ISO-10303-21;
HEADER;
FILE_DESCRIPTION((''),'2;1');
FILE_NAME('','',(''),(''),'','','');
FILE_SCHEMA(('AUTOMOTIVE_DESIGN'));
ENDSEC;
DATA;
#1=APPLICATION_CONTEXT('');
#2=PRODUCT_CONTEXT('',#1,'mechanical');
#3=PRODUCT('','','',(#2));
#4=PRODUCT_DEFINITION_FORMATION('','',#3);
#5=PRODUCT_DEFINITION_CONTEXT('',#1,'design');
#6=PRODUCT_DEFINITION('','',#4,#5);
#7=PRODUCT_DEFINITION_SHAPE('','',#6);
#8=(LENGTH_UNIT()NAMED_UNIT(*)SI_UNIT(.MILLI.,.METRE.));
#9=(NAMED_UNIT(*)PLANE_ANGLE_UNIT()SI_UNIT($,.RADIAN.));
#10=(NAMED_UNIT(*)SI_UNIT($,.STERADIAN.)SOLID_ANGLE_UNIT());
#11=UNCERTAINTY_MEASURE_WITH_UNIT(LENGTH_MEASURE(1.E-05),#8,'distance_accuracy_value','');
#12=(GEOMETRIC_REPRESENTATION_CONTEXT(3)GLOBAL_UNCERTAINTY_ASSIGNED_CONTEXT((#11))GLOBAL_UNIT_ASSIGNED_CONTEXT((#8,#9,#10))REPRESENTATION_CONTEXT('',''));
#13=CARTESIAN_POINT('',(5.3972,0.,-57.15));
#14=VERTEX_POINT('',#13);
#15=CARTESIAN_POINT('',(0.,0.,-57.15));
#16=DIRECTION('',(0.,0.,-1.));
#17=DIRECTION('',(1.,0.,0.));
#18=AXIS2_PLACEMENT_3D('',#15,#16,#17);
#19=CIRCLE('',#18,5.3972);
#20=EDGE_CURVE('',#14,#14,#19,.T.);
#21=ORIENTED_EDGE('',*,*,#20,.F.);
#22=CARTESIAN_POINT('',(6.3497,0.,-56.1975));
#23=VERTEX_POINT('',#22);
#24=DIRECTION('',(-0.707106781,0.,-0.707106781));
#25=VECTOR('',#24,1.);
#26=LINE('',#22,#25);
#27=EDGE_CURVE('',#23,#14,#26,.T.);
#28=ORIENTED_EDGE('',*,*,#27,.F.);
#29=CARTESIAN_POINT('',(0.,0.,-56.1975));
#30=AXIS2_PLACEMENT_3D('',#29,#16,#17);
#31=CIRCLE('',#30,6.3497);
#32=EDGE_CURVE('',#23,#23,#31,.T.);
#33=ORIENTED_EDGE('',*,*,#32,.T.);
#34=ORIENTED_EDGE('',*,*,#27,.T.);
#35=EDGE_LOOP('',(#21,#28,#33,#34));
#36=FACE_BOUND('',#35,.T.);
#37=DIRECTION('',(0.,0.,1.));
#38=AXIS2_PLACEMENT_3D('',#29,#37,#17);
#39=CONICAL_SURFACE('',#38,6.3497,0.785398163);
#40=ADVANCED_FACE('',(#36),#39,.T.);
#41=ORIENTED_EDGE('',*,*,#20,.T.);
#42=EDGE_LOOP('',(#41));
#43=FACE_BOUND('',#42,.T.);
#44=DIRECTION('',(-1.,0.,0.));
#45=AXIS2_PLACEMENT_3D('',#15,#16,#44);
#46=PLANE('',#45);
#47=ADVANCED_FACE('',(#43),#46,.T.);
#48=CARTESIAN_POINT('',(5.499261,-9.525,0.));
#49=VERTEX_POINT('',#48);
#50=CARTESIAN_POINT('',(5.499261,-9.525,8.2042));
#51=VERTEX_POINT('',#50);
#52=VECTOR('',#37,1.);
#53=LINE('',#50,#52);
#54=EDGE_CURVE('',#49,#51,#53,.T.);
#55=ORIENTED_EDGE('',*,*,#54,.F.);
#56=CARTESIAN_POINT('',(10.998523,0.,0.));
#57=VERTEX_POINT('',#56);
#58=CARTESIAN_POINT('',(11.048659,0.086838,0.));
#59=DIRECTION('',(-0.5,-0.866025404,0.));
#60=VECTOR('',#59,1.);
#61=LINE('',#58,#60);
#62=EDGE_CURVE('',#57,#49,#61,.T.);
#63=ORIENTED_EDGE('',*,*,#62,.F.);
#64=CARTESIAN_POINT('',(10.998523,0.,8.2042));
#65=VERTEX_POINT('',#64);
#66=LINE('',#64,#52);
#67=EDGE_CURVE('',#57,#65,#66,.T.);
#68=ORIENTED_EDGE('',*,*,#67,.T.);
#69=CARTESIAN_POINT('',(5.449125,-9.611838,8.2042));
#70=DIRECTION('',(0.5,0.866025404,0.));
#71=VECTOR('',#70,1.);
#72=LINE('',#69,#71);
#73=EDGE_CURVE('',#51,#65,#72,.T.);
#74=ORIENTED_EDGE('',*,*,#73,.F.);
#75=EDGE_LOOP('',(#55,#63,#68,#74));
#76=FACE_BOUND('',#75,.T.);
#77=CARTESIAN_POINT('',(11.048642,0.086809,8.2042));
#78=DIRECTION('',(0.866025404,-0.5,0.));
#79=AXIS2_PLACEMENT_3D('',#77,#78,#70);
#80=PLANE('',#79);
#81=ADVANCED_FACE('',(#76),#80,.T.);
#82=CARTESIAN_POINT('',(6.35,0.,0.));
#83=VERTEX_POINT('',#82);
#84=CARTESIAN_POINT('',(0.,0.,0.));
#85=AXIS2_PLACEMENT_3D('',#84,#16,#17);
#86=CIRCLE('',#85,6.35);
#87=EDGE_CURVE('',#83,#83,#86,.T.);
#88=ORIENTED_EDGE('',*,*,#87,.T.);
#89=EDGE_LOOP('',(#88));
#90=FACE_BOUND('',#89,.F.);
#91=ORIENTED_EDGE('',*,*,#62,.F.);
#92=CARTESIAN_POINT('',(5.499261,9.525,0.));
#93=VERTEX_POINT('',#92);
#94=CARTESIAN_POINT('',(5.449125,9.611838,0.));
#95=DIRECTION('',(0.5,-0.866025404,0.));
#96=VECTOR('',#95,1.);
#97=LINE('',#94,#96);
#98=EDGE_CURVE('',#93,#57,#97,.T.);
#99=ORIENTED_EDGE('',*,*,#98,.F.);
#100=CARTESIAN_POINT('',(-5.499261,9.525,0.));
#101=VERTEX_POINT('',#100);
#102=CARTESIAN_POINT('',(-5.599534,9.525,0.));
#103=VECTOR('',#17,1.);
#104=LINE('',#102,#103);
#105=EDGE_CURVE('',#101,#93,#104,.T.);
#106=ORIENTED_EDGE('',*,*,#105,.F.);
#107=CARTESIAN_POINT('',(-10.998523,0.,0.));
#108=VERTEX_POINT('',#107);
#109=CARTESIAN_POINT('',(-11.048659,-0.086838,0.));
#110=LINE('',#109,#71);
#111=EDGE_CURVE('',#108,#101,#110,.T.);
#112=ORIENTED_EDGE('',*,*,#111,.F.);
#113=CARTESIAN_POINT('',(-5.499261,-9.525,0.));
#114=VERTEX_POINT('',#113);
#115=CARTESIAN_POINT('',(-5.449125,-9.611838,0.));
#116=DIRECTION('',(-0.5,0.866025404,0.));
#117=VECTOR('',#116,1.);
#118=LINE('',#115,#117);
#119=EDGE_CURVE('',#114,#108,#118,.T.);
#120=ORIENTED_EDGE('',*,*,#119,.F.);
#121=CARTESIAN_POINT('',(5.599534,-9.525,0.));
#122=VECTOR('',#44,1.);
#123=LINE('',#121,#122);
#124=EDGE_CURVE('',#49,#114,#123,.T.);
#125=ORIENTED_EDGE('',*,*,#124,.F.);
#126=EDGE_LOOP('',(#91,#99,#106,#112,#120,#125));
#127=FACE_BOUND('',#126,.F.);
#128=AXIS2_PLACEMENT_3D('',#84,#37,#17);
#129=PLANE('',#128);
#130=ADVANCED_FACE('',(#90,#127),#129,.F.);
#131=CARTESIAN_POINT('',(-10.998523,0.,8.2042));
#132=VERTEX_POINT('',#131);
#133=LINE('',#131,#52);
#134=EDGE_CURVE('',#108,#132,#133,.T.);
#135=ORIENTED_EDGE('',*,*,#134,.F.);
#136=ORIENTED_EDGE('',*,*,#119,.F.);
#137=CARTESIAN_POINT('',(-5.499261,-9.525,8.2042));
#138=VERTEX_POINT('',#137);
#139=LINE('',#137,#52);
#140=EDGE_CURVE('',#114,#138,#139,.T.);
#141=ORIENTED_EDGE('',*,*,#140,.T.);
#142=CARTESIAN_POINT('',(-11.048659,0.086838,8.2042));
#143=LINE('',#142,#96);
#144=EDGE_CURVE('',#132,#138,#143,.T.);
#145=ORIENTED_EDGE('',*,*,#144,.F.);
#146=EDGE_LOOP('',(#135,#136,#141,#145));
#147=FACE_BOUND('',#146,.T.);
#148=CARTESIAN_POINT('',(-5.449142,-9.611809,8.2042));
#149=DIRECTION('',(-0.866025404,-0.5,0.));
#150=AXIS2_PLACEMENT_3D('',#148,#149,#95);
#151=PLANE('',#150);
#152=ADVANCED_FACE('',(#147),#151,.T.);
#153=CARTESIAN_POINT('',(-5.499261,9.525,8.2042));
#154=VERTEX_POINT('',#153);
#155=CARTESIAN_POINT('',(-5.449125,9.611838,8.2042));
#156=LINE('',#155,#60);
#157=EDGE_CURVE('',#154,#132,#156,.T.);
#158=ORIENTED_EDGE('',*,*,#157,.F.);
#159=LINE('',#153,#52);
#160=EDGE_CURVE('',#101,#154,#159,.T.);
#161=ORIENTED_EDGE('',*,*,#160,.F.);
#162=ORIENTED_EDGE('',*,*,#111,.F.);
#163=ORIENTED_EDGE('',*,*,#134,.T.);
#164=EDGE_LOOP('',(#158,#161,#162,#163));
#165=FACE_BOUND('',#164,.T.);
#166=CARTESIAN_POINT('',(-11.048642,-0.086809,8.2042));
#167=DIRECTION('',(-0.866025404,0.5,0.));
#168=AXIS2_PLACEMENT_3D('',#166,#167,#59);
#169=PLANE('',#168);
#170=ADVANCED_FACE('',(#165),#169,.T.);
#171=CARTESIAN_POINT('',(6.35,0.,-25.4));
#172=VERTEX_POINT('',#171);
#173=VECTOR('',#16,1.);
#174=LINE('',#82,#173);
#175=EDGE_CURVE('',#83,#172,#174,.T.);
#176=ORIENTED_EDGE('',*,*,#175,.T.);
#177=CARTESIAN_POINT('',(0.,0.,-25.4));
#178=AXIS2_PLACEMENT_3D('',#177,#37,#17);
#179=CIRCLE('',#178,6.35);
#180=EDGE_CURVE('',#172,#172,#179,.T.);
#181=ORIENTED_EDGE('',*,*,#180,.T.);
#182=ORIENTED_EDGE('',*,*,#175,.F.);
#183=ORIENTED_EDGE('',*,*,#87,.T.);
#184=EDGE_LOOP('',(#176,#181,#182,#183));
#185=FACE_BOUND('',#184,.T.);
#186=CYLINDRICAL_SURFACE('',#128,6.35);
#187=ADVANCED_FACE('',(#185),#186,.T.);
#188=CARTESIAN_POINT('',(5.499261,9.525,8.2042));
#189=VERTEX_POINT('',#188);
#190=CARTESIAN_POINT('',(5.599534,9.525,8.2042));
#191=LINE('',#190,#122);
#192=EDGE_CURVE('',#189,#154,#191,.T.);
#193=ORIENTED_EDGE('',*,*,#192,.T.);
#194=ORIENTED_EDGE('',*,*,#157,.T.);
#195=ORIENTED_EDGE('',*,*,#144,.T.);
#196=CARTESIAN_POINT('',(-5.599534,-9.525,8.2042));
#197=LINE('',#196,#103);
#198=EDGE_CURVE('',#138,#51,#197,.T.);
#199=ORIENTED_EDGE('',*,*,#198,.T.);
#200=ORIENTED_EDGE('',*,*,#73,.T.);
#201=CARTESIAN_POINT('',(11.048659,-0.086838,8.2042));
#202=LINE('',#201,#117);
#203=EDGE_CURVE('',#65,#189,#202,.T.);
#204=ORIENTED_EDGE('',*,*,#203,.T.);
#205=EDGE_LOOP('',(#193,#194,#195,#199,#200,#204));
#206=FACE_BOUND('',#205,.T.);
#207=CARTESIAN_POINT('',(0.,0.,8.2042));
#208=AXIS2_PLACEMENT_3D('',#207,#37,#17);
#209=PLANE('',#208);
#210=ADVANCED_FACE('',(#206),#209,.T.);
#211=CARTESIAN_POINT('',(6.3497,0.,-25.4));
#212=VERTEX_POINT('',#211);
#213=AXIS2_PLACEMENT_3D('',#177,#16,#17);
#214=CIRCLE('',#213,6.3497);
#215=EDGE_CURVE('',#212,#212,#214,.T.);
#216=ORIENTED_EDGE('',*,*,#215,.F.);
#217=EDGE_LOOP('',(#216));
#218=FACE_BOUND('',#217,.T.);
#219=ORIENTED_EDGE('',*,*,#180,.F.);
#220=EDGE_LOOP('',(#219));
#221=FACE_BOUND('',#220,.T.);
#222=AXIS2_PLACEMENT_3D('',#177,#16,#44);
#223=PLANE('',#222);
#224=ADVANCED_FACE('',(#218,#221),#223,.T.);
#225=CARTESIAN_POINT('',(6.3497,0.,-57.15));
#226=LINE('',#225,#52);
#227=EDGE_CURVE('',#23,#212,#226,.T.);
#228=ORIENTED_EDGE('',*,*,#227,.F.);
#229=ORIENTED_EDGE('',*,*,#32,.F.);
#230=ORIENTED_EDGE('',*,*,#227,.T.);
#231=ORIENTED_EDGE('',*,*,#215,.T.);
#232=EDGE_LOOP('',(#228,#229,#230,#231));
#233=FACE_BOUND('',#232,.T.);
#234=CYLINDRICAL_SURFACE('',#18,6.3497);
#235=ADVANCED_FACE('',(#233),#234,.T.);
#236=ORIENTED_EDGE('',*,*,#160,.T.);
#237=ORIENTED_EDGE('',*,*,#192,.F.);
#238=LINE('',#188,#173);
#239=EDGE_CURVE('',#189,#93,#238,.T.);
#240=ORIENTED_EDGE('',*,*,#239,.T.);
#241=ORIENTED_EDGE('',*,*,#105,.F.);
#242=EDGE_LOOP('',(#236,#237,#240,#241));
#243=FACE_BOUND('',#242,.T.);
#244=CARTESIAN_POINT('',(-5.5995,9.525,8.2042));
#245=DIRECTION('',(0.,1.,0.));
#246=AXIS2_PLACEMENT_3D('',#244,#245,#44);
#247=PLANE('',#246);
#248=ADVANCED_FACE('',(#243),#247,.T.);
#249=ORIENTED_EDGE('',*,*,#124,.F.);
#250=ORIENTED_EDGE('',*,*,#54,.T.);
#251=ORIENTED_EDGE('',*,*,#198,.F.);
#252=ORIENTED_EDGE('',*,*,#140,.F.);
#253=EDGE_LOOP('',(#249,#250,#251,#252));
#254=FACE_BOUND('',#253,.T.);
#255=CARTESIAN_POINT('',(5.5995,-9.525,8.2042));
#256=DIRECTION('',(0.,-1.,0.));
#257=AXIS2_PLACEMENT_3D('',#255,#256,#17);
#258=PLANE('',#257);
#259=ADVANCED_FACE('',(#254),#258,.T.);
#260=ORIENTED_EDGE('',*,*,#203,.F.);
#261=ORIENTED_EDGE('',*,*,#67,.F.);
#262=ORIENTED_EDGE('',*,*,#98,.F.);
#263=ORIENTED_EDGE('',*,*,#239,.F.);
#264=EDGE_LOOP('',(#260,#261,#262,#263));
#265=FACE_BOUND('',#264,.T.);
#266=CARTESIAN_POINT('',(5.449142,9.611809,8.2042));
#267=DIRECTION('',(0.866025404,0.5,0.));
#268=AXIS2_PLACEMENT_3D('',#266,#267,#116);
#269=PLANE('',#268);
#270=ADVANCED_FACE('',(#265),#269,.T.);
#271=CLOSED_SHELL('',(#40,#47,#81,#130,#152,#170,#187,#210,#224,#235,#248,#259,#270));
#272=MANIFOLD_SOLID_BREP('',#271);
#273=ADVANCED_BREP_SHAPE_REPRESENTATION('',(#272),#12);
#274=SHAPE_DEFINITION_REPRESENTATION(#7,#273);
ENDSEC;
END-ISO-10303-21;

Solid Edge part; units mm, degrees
sketch "Sketch1" plane through (0, 0, 0) normal (0, 0, 1) x (1, 0, 0)
  circle A0 centre (0, 0) radius 11.049
  dimension "D1" = 22.098
extrude "Protrusion1" add sketch "Sketch1" along normal blind 8.2042
sketch "Sketch2" plane through (0, 0, 0) normal (0, 0, -1) x (1, 0, 0)
  circle A0 centre (0, 0) radius 6.35
extrude "Protrusion2" add sketch "Sketch2" along normal blind 57.15
sketch "Sketch3" plane through (0, 0, -57.15) normal (0, 0, -1) x (1, 0, 0)
  circle A0 centre (0, 0) radius 6.3497
extrude "Cutout1" cut sketch "Sketch3" against normal blind 31.75 flip side to cut
chamfer "Chamfer_1" distance 0.9525 angle 45 1 edges at (-6.3497, 0, -57.15)
sketch "Sketch4" plane through (0, 0, 8.2042) normal (0, 0, 1) x (1, 0, 0)
  line L0 (-5.5995, 9.525) -> (5.5995, 9.525)
  dimension "D1" = 19.05
extrude "Cutout2" cut sketch "Sketch4" against normal up to next material side at (0, 9.575, 8.2042)
pattern_circular "Pattern1" count 6 over 360 about axis through (0, 0, 8.2042) along (0, 0, 1) of "Cutout2"
properties part number "24106011"
